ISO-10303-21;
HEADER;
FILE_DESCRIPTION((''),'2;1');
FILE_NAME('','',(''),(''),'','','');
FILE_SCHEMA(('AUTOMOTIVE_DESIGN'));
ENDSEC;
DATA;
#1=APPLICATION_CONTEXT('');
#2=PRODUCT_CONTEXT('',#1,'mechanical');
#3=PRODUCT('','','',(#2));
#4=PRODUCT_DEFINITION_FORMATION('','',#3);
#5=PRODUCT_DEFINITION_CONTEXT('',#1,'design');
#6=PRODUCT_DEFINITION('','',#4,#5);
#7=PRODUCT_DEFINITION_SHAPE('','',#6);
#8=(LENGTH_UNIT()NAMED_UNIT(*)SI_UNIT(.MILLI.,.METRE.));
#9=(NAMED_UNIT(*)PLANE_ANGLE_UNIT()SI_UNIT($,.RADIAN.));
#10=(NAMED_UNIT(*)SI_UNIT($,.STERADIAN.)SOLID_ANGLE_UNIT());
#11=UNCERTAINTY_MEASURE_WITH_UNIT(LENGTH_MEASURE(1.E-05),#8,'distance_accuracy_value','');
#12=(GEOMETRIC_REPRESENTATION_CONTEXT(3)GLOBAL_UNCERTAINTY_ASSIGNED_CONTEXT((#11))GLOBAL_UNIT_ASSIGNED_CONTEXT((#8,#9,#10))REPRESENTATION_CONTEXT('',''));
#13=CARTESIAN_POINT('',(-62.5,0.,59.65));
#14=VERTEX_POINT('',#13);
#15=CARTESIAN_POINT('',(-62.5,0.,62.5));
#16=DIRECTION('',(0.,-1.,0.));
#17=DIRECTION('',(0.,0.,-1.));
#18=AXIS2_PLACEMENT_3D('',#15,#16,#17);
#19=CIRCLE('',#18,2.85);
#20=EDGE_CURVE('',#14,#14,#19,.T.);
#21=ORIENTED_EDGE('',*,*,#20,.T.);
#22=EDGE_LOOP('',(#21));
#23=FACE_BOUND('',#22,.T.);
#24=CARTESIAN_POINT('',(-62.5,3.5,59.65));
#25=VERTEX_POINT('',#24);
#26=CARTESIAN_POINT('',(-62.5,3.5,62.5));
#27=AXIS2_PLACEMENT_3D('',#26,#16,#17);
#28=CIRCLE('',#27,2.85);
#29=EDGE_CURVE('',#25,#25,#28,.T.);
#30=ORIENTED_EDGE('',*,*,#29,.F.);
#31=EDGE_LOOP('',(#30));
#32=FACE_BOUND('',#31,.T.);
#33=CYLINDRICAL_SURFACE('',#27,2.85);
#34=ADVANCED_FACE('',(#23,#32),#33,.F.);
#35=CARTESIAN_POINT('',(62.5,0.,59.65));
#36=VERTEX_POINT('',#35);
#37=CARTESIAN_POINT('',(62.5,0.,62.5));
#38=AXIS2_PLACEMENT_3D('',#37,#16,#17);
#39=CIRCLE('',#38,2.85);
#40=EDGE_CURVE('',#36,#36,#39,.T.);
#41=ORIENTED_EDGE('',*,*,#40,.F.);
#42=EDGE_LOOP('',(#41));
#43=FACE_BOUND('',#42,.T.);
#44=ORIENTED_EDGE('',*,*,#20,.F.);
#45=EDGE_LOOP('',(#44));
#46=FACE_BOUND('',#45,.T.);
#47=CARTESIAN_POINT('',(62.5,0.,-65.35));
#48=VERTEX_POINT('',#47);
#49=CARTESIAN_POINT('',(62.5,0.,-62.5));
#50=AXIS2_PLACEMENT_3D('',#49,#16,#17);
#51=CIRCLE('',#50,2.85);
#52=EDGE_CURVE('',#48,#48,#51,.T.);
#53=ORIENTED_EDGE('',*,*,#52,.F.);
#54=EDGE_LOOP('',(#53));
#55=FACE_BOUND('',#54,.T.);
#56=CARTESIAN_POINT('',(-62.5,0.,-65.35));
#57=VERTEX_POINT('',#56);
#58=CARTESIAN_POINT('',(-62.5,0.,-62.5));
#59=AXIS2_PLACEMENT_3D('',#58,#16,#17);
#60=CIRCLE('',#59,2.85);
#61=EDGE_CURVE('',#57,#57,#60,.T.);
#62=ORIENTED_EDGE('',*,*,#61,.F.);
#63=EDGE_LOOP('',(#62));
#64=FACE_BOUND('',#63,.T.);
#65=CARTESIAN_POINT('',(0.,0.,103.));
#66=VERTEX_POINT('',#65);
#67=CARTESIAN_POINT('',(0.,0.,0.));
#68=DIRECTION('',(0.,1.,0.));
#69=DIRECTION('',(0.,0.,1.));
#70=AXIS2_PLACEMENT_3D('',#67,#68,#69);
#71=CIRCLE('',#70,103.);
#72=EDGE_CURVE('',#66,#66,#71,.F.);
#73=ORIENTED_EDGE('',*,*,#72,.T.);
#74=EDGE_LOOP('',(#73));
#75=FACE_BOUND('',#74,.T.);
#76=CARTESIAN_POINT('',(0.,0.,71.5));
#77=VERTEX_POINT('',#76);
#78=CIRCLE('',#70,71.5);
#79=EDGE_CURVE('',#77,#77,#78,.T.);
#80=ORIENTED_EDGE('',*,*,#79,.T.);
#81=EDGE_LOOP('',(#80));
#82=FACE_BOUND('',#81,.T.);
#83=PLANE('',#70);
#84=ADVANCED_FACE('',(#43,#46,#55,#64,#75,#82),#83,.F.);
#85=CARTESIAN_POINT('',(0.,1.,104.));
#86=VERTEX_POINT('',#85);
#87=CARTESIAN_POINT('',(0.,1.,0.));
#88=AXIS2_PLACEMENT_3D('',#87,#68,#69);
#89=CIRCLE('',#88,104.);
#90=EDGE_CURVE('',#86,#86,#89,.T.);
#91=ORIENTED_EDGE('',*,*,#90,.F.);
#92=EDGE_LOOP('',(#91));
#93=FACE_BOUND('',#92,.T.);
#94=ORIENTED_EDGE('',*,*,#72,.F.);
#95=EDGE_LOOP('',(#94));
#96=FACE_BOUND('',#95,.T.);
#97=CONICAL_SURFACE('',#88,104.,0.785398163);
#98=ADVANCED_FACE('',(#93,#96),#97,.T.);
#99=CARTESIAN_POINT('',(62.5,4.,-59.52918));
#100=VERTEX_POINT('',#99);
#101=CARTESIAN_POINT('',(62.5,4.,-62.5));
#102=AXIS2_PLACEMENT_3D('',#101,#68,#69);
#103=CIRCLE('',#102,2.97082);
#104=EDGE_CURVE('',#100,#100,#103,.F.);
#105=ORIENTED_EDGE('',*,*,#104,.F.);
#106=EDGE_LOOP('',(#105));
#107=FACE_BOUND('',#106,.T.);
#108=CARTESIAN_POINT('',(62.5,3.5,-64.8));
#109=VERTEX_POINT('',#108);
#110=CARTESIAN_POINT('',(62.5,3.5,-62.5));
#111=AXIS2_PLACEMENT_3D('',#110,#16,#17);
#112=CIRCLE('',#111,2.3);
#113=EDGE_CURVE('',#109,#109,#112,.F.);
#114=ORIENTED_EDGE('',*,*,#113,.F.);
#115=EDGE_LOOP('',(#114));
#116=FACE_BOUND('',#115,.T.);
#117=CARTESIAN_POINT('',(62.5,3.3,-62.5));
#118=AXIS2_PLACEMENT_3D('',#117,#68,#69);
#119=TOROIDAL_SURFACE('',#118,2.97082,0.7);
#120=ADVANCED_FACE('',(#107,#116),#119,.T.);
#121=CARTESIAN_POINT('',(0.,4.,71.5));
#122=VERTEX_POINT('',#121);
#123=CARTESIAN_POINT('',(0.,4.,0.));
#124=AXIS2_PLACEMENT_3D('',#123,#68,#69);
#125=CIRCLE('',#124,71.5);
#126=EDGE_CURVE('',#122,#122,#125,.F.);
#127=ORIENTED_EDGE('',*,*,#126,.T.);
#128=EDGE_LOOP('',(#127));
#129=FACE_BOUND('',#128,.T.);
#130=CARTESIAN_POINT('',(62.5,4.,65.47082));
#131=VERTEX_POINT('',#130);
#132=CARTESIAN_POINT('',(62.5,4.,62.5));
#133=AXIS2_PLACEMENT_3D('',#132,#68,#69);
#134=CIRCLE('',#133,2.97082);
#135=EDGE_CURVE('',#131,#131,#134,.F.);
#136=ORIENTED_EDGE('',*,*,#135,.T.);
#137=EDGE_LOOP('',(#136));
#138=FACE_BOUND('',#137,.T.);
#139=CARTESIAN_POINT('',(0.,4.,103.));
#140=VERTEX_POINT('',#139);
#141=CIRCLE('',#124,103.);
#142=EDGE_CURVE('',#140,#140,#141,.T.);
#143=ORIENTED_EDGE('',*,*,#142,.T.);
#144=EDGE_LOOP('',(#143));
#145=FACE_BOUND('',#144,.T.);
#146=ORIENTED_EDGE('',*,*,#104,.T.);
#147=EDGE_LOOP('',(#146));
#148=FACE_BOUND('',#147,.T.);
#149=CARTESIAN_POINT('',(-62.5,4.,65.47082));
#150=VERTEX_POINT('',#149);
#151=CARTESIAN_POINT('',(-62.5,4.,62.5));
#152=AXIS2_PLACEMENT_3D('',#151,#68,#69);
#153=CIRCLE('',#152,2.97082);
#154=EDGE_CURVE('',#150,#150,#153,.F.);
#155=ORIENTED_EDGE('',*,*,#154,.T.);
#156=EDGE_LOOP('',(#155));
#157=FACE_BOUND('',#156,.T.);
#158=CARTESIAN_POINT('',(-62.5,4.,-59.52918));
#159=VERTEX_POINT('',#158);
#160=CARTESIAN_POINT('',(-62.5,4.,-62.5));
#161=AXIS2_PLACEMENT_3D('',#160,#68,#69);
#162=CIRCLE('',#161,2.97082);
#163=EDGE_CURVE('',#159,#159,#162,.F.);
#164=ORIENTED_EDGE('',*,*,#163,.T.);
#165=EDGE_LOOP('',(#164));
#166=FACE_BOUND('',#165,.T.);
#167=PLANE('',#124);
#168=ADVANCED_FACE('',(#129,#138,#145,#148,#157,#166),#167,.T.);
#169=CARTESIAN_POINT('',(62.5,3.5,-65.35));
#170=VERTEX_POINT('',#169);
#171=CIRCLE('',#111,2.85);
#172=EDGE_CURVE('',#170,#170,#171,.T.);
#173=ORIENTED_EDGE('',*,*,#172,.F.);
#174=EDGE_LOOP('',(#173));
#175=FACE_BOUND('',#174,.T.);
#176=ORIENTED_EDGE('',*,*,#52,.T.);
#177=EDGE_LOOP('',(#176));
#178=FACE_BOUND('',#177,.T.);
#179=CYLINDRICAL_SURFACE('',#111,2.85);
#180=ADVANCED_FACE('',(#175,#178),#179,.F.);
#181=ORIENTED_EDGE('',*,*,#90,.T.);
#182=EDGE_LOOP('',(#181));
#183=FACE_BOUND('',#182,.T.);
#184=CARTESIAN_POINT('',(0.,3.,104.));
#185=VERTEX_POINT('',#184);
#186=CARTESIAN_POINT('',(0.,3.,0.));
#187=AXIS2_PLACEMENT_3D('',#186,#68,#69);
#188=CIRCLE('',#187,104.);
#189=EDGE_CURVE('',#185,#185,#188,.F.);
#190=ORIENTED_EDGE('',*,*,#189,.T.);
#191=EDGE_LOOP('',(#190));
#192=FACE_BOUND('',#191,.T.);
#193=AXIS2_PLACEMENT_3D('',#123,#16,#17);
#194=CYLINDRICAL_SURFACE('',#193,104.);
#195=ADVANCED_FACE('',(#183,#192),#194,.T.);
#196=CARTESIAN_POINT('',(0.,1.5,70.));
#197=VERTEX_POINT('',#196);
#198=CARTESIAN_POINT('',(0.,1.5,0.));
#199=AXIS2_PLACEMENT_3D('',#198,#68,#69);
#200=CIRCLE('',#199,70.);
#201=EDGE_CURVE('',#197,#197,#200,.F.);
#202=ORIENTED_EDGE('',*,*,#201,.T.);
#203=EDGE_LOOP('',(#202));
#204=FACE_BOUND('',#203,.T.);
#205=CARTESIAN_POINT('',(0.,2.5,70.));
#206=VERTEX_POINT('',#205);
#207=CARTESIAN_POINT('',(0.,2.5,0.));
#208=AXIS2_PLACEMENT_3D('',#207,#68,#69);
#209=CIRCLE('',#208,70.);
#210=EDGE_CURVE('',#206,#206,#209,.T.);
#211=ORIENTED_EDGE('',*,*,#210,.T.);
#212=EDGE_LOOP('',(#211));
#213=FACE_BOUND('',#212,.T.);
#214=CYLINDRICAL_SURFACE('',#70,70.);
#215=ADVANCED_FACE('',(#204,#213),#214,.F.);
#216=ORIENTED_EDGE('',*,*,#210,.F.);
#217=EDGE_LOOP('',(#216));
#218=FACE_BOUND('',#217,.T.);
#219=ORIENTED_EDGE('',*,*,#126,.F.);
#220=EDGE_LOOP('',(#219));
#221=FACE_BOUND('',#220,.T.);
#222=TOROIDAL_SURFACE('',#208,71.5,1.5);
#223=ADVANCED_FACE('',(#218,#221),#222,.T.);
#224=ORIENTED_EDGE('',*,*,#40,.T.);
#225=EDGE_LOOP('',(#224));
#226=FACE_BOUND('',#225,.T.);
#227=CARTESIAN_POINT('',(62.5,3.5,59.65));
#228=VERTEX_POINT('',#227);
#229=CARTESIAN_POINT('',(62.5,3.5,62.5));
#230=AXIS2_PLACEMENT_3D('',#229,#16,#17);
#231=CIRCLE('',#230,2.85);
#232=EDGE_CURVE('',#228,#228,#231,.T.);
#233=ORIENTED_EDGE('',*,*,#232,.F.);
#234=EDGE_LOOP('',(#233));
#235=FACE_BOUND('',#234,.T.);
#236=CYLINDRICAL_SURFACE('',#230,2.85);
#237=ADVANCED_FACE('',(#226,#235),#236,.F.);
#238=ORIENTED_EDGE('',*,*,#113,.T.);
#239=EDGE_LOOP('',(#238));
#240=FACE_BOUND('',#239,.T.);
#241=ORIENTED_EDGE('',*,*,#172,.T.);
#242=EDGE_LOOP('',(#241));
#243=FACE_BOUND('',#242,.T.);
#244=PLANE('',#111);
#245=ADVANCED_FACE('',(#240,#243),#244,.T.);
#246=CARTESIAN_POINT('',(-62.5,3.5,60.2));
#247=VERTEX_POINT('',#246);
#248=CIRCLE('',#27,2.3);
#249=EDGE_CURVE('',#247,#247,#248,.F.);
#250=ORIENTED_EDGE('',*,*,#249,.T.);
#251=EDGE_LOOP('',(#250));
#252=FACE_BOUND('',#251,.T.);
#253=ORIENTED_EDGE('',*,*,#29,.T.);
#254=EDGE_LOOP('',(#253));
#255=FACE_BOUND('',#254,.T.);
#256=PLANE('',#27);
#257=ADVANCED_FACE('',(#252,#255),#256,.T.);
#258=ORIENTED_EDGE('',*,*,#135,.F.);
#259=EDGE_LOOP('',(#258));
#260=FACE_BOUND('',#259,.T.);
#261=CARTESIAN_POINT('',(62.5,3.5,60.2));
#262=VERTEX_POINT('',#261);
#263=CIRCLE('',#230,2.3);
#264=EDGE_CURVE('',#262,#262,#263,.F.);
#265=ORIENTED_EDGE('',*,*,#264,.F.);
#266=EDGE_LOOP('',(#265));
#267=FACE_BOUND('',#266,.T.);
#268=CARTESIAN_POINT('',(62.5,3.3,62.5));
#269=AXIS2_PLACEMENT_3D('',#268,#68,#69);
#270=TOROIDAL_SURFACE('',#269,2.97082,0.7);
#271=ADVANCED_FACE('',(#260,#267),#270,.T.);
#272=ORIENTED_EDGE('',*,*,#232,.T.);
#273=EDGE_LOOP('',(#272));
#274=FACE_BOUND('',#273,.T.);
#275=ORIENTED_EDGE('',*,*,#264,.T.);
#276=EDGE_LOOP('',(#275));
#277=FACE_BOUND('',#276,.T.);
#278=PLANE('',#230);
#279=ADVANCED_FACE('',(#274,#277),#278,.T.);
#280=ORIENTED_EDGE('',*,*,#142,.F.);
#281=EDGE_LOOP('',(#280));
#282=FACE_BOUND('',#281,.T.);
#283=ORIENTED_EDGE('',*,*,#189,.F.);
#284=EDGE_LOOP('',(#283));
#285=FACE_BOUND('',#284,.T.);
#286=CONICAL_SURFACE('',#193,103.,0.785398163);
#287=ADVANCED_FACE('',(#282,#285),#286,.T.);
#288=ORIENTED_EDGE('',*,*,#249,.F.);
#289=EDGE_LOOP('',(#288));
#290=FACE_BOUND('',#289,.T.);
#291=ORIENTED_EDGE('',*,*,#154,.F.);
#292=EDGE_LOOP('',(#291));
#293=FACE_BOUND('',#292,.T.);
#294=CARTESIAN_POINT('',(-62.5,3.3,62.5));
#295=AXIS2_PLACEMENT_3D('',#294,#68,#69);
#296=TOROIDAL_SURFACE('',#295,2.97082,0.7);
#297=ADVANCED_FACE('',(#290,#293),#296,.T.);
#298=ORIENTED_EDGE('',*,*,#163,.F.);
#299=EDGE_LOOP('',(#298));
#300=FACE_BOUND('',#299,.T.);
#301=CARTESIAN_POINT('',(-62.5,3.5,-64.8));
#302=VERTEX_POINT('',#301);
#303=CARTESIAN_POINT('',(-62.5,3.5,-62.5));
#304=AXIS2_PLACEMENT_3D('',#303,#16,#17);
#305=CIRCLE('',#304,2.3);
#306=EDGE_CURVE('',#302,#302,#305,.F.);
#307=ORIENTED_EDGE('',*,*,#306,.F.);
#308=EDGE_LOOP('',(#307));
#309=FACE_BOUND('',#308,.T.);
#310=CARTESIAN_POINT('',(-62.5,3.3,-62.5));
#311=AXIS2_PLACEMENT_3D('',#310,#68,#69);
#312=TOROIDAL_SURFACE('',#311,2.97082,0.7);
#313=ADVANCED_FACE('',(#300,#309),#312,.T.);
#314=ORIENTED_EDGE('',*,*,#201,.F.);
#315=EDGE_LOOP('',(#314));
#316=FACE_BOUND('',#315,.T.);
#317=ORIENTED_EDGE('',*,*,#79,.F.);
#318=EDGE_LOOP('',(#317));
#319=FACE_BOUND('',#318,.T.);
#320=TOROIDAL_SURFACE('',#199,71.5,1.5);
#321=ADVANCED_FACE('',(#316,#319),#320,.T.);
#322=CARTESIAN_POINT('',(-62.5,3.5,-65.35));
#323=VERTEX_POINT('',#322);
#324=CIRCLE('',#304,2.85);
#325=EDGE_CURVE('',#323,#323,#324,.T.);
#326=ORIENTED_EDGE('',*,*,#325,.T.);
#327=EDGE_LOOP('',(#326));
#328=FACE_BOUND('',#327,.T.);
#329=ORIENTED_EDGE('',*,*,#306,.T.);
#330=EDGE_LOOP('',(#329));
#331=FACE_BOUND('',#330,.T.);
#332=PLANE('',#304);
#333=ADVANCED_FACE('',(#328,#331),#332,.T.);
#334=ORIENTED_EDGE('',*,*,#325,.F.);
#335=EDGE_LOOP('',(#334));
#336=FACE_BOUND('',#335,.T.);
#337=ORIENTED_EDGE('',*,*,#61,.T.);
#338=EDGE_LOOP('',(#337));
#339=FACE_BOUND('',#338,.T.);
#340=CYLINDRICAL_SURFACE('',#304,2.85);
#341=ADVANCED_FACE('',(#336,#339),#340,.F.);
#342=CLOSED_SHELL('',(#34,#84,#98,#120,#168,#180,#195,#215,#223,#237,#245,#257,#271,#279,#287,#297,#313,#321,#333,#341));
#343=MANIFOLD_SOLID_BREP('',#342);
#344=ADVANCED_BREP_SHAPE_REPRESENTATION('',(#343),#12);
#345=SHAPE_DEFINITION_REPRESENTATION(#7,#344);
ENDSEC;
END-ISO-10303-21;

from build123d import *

# Parameters (mm, degrees)
SKETCH2_R             = 104
BOSS_EXTRUDE3_DEPTH   = 4
F_1_0MM_DOWEL_HOLE1_D = 4.6
SKETCH7_R             = 70
CUT_EXTRUDE1_DEPTH    = 4
FILLET1_R             = 1.5
SKETCH8_R             = 2.85
CUT_EXTRUDE2_DEPTH    = 3.5
SKETCH8_3_R           = 2.85
CUT_EXTRUDE3_DEPTH    = 3.5
CHAMFER1_SIZE         = 1
FILLET2_R             = 0.7
FILLET3_R             = 0.7
FILLET4_R             = 0.7
FILLET5_R             = 0.7


with BuildPart() as part:
    # Sketch2 → Boss-Extrude3 (new body)
    with BuildSketch(Plane(origin=(0, 0, 0), x_dir=(1, 0, 0), z_dir=(0, 1, 0))):
        with Locations(Location((0, 0, 0), (0, 0, 270))):
            Circle(SKETCH2_R)
    extrude(amount=BOSS_EXTRUDE3_DEPTH)

    # Ø1.0mm Dowel Hole1 (through all)
    with Locations(Plane(origin=(0, 4, 0), x_dir=(1, 0, 0), z_dir=(0, 1, 0))):
        with Locations((-62.5, 62.5), (62.5, 62.5), (62.5, -62.5), (-62.5, -62.5)):
            Hole(F_1_0MM_DOWEL_HOLE1_D / 2)

    # Sketch7 → Cut-Extrude1 (cut)
    with BuildSketch(Plane(origin=(0, 4, 0), x_dir=(1, 0, 0), z_dir=(0, 1, 0))):
        with Locations(Location((0, 0, 0), (0, 0, 270))):
            Circle(SKETCH7_R)
    extrude(amount=-CUT_EXTRUDE1_DEPTH, mode=Mode.SUBTRACT)

    # Fillet1
    fillet1_edges = [part.edges().sort_by_distance(p)[0] for p in [
        (0, 0, -70),
        (0, 4, -70),
    ]]
    fillet(fillet1_edges, radius=FILLET1_R)

    # Sketch8 → Cut-Extrude2 (cut)
    with BuildSketch(Plane.XZ):
        with Locations(Location((-62.5, 62.5, 0), (0, 0, 270))):
            Circle(SKETCH8_R)
    extrude(amount=-CUT_EXTRUDE2_DEPTH, mode=Mode.SUBTRACT)

    # Sketch8<3> → Cut-Extrude3 (cut)
    with BuildSketch(Plane.XZ):
        with Locations(Location((-62.5, -62.5, 0), (0, 0, 270))):
            Circle(SKETCH8_3_R)
        with Locations(Location((62.5, -62.5, 0), (0, 0, 270))):
            Circle(SKETCH8_3_R)
        with Locations(Location((62.5, 62.5, 0), (0, 0, 270))):
            Circle(SKETCH8_3_R)
        with Locations(Location((-62.5, 62.5, 0), (0, 0, 270))):
            Circle(SKETCH8_3_R)
    extrude(amount=-CUT_EXTRUDE3_DEPTH, mode=Mode.SUBTRACT)

    # Chamfer1
    chamfer1_edges = [part.edges().sort_by_distance(p)[0] for p in [
        (0, 0, -104),
        (0, 4, -104),
    ]]
    chamfer(chamfer1_edges, length=CHAMFER1_SIZE)

    # Fillet2
    # the kernel refuses this fillet: 0.7 mm, written as the material it takes off along each edge
    with BuildSketch(Plane(origin=(-62.5, 4, -62.5), x_dir=(-1, 0, 0), z_dir=(0, 0, 1))) as fillet2_piece_1:
        with BuildLine():
            CenterArc((2.970820393, 0.7), FILLET2_R, 196.601549599, 73.398450401)
            Line((2.970820393, 0), (2.970820393, -0.014))
            Line((2.970820393, -0.014), (2.3, -0.014))
            Line((2.3, -0.014), (2.286, 0))
            ThreePointArc((2.286, 0), (2.286, 0.25), (2.286583592, 0.496))
            Line((2.286583592, 0.496), (2.3, 0.5))
        make_face()
    revolve(axis=Axis((-62.5, 4, -62.5), (0, -1, 0)), mode=Mode.SUBTRACT)

    # Fillet3
    # the kernel refuses this fillet: 0.7 mm, written as the material it takes off along each edge
    with BuildSketch(Plane(origin=(62.5, 4, -62.5), x_dir=(-1, 0, 0), z_dir=(0, 0, 1))) as fillet3_piece_1:
        with BuildLine():
            CenterArc((2.970820393, 0.7), FILLET3_R, 196.601549599, 73.398450401)
            Line((2.970820393, 0), (2.970820393, -0.014))
            Line((2.970820393, -0.014), (2.3, -0.014))
            Line((2.3, -0.014), (2.286, 0))
            ThreePointArc((2.286, 0), (2.286, 0.25), (2.286583592, 0.496))
            Line((2.286583592, 0.496), (2.3, 0.5))
        make_face()
    revolve(axis=Axis((62.5, 4, -62.5), (0, -1, 0)), mode=Mode.SUBTRACT)

    # Fillet4
    # the kernel refuses this fillet: 0.7 mm, written as the material it takes off along each edge
    with BuildSketch(Plane(origin=(62.5, 4, 62.5), x_dir=(-1, 0, 0), z_dir=(0, 0, 1))) as fillet4_piece_1:
        with BuildLine():
            CenterArc((2.970820393, 0.7), FILLET4_R, 196.601549599, 73.398450401)
            Line((2.970820393, 0), (2.970820393, -0.014))
            Line((2.970820393, -0.014), (2.3, -0.014))
            Line((2.3, -0.014), (2.286, 0))
            ThreePointArc((2.286, 0), (2.286, 0.25), (2.286583592, 0.496))
            Line((2.286583592, 0.496), (2.3, 0.5))
        make_face()
    revolve(axis=Axis((62.5, 4, 62.5), (0, -1, 0)), mode=Mode.SUBTRACT)

    # Fillet5
    # the kernel refuses this fillet: 0.7 mm, written as the material it takes off along each edge
    with BuildSketch(Plane(origin=(-62.5, 4, 62.5), x_dir=(-1, 0, 0), z_dir=(0, 0, 1))) as fillet5_piece_1:
        with BuildLine():
            CenterArc((2.970820393, 0.7), FILLET5_R, 196.601549599, 73.398450401)
            Line((2.970820393, 0), (2.970820393, -0.014))
            Line((2.970820393, -0.014), (2.3, -0.014))
            Line((2.3, -0.014), (2.286, 0))
            ThreePointArc((2.286, 0), (2.286, 0.25), (2.286583592, 0.496))
            Line((2.286583592, 0.496), (2.3, 0.5))
        make_face()
    revolve(axis=Axis((-62.5, 4, 62.5), (0, -1, 0)), mode=Mode.SUBTRACT)


solid = part.part
